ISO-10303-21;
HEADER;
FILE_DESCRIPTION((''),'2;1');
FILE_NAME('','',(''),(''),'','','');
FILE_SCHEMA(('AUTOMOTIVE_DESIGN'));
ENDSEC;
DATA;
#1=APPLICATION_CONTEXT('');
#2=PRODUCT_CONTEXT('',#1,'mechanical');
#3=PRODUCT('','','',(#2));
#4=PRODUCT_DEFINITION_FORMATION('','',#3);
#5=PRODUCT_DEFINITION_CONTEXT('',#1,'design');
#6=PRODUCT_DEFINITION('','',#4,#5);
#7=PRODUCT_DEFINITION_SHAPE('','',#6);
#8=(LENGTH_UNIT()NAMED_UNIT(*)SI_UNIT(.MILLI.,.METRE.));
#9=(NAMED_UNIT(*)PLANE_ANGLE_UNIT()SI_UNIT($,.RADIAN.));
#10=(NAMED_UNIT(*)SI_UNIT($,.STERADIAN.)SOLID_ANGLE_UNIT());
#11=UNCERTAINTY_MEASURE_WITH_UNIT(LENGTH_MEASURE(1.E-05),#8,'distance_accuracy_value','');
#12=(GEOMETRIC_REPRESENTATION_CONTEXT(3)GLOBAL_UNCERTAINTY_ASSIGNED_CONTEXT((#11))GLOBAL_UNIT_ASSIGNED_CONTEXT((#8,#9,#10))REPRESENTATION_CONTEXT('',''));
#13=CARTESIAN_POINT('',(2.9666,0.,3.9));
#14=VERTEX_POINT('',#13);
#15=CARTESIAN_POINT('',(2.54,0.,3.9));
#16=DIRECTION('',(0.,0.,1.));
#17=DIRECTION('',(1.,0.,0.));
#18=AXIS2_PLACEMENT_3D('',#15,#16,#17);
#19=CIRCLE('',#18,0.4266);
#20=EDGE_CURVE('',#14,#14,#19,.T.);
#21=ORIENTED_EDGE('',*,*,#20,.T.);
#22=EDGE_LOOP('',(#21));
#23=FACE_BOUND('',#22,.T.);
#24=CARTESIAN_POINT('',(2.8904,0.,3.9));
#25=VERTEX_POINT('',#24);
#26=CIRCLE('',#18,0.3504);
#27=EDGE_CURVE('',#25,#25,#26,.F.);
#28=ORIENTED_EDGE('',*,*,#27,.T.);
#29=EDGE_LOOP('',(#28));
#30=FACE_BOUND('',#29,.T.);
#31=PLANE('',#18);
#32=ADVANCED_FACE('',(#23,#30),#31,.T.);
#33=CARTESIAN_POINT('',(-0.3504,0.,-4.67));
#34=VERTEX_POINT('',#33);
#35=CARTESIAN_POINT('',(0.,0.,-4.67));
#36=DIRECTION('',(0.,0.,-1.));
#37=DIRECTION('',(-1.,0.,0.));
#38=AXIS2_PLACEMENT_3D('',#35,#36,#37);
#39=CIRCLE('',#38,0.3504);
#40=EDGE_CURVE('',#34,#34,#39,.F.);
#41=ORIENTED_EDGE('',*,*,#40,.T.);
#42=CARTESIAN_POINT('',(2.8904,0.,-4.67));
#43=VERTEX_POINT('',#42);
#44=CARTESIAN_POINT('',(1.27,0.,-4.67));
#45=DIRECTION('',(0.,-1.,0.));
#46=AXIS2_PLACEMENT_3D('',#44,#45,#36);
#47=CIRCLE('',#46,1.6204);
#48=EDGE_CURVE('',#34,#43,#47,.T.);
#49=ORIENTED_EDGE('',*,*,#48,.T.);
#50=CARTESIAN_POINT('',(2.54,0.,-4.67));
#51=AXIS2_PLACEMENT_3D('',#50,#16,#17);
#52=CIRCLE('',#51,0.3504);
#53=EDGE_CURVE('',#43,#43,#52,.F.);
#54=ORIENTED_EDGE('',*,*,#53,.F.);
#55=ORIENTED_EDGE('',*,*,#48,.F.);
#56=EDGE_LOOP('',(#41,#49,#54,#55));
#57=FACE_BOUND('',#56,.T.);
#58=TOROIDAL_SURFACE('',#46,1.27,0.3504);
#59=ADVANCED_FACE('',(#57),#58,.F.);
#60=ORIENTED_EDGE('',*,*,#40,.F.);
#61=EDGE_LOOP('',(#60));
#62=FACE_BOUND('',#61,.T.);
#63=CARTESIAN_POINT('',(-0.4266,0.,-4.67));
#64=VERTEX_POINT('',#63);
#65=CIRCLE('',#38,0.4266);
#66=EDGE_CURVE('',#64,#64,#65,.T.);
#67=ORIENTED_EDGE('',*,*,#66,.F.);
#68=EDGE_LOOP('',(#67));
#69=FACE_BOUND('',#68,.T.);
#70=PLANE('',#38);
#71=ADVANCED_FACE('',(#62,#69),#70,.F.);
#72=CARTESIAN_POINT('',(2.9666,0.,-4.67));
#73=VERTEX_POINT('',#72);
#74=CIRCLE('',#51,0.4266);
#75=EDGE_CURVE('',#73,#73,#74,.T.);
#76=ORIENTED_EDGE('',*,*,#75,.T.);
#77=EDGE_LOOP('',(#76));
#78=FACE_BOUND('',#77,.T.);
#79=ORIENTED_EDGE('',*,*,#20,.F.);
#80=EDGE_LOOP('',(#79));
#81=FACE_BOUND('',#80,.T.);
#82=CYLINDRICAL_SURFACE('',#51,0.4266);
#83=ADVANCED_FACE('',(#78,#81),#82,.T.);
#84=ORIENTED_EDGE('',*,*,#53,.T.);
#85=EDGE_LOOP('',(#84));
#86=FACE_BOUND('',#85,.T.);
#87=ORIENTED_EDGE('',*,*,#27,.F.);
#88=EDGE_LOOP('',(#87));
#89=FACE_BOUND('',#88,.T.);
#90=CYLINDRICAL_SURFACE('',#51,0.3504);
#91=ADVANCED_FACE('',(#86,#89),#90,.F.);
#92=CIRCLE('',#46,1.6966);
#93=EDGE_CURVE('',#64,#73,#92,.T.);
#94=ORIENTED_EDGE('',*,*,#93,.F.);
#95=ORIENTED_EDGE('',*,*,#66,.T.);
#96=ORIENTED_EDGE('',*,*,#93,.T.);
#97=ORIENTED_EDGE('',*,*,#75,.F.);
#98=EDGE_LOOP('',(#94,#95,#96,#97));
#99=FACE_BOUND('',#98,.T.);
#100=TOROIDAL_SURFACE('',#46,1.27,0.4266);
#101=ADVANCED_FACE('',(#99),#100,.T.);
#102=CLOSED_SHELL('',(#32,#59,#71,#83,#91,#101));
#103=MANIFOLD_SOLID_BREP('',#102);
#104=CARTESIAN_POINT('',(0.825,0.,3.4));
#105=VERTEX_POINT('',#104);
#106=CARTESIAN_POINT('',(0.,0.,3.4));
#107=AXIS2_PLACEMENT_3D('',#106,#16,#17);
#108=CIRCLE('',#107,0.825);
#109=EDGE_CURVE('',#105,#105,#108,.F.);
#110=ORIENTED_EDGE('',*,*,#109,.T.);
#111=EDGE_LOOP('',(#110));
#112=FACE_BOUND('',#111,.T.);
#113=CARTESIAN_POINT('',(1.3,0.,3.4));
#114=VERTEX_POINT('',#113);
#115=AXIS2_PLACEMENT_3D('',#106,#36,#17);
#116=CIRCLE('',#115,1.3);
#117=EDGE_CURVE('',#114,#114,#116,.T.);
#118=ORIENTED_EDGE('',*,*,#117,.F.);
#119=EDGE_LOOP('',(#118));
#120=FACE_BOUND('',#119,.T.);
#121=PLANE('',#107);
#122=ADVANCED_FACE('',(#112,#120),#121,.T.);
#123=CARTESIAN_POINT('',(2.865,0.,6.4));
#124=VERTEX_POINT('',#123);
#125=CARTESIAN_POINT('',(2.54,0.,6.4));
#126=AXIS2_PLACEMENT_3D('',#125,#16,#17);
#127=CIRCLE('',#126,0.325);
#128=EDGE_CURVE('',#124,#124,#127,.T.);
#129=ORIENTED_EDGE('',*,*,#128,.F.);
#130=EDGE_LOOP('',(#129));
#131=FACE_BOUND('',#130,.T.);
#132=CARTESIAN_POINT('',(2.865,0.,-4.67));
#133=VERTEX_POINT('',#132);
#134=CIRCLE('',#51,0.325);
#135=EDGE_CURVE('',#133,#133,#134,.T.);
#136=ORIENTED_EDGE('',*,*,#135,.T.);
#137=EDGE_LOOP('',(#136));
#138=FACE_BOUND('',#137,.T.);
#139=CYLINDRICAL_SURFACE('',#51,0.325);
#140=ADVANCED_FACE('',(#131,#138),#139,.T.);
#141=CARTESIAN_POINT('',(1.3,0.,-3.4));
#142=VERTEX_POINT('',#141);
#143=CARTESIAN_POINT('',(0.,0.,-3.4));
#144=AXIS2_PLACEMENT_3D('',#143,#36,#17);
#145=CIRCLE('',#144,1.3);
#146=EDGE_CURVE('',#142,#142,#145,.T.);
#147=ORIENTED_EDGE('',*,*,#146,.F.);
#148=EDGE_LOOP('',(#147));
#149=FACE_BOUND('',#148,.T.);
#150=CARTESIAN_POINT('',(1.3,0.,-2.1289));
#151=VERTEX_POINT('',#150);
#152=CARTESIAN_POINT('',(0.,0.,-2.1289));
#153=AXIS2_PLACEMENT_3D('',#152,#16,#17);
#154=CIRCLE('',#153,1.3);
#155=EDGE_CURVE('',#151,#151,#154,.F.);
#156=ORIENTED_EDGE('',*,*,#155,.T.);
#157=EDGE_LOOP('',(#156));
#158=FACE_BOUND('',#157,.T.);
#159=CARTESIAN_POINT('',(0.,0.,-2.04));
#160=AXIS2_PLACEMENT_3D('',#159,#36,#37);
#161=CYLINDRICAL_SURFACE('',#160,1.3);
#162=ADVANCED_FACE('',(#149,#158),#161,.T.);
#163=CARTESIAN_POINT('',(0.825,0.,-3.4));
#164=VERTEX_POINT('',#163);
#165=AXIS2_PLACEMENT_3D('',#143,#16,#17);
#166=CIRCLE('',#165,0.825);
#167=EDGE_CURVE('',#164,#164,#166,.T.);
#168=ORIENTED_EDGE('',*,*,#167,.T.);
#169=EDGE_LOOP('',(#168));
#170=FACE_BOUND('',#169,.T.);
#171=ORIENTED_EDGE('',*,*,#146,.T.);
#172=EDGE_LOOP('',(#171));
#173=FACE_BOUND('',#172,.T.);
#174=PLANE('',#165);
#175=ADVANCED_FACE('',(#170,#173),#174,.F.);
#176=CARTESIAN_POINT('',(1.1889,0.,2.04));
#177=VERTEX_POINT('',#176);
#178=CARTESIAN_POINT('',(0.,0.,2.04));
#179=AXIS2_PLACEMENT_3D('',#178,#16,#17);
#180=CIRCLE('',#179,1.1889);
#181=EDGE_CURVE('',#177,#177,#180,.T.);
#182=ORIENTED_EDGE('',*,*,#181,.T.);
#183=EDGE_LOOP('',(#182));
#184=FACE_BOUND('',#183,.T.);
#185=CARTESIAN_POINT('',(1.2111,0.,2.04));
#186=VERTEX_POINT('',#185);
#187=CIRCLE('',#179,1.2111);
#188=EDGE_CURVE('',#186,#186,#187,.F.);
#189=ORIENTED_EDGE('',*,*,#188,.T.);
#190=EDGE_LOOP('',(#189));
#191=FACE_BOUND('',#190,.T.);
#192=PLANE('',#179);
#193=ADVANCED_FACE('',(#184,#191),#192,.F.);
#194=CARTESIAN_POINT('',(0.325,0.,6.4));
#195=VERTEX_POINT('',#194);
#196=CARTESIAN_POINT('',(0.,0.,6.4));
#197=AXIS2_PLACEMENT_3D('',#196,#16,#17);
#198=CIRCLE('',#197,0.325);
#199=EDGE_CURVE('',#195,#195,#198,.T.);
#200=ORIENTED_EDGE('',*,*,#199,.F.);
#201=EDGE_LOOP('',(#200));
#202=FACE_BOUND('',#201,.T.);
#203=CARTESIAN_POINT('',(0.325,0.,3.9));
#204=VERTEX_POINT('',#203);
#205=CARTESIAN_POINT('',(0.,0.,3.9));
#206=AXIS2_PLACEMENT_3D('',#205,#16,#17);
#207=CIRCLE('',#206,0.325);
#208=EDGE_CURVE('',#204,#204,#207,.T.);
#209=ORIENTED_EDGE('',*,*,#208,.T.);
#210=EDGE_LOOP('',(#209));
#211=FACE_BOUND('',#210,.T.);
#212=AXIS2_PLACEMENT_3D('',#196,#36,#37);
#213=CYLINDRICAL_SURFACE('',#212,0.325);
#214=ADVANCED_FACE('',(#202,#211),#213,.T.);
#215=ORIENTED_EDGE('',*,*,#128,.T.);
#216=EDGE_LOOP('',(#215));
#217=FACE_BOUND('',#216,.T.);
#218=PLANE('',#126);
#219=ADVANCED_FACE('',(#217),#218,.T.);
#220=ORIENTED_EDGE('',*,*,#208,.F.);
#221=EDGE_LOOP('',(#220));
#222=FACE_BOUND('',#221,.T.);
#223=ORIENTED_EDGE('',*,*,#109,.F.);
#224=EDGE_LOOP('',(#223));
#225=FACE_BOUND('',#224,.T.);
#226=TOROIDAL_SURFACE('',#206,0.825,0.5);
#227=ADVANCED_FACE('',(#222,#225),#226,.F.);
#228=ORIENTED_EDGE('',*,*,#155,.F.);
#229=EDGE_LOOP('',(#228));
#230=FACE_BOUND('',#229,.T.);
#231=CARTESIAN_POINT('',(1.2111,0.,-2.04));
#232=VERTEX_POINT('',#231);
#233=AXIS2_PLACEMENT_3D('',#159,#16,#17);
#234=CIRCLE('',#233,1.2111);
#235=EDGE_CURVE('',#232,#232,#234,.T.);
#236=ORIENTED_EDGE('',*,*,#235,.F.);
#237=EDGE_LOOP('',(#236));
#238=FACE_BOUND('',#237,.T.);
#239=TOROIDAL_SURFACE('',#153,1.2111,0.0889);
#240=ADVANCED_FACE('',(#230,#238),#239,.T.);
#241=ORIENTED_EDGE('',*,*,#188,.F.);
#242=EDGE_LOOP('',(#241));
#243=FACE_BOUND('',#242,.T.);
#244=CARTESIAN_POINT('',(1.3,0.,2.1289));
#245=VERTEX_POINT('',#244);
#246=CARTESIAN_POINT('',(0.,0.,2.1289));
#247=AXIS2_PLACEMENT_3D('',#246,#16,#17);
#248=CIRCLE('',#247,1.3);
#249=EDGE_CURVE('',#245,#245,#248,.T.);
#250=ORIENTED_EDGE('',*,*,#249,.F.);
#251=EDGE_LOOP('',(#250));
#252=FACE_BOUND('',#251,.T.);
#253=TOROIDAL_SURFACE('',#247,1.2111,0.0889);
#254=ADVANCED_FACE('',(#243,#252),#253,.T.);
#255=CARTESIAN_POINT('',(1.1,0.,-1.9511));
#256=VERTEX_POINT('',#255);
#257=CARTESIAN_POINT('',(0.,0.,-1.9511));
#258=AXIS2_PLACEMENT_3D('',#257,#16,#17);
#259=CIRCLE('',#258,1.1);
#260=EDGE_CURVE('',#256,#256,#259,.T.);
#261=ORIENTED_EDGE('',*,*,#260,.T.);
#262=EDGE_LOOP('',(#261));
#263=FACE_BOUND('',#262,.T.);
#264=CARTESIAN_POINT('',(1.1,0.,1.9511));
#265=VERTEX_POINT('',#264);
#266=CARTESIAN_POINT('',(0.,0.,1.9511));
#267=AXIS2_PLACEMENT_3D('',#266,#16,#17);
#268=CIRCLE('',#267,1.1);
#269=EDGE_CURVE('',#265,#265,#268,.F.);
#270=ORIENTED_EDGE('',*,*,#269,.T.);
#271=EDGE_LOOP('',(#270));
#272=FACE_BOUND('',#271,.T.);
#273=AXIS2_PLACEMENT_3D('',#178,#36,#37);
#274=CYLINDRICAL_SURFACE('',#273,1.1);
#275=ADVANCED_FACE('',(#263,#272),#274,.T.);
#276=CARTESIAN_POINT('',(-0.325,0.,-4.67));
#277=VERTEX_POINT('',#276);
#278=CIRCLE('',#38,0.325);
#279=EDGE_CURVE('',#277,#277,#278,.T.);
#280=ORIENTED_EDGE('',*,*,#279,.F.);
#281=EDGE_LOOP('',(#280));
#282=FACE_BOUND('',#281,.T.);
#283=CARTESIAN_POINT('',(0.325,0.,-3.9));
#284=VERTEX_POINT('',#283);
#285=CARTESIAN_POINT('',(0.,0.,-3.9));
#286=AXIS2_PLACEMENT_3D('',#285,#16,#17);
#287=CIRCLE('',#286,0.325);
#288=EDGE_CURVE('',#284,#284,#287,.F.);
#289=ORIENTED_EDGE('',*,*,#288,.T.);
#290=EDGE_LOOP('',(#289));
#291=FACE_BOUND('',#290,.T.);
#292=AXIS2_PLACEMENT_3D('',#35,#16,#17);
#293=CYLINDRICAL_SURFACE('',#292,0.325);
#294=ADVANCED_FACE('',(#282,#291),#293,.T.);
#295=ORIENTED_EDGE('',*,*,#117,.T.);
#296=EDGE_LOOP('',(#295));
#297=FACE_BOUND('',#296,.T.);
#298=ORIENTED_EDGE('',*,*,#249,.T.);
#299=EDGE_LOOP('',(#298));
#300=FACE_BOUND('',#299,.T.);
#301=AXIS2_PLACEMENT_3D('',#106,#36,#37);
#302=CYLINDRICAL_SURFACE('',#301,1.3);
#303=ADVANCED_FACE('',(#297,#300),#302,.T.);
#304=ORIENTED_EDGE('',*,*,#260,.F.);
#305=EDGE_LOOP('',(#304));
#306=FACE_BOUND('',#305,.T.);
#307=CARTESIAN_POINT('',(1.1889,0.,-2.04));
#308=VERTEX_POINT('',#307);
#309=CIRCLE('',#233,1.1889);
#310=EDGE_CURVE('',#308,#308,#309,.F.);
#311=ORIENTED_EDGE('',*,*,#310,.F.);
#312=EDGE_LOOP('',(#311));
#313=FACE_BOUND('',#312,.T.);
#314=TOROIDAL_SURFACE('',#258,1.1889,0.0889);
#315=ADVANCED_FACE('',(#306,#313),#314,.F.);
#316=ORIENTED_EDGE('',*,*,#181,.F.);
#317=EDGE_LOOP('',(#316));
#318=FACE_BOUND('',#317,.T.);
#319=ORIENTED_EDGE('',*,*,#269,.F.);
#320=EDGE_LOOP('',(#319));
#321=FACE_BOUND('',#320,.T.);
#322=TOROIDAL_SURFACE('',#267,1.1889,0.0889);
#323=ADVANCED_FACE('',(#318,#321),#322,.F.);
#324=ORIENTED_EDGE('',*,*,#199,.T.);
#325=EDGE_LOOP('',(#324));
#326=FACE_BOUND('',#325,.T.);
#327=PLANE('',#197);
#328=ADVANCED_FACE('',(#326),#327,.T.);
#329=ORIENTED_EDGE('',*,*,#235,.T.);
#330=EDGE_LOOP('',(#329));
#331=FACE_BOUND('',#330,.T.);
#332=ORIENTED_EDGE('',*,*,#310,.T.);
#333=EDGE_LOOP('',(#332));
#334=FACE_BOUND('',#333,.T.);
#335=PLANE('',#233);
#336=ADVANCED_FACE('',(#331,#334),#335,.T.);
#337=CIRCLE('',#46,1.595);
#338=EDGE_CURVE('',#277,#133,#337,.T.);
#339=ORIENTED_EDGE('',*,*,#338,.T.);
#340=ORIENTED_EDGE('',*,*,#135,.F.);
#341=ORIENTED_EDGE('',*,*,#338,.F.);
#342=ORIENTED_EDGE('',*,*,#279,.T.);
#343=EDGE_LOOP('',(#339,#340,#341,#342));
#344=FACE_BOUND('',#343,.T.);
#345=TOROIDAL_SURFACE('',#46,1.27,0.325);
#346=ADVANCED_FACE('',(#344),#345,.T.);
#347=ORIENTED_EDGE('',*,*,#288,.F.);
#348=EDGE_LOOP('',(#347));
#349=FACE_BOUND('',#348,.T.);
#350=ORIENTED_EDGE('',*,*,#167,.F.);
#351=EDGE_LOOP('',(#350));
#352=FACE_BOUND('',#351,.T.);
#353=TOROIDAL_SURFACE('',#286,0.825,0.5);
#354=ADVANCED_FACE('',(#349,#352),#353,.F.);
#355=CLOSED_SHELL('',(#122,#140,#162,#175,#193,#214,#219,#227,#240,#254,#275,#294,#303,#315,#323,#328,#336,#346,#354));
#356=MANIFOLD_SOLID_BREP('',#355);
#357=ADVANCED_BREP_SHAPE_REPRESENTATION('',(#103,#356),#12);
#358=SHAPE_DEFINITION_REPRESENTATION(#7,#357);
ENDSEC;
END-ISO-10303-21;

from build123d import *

# Parameters (mm, degrees)
SKETCH1_R           = 1.3
BOSS_EXTRUDE1_DEPTH = 1.36
SKETCH2_R           = 1.1
BOSS_EXTRUDE2_DEPTH = 4.08
SKETCH3_R           = 1.3
BOSS_EXTRUDE3_DEPTH = 1.36
SKETCH4_R           = 0.325
BOSS_EXTRUDE4_DEPTH = 1.27
BOSS_EXTRUDE5_START = 3
SKETCH5_R           = 0.325
BOSS_EXTRUDE5_DEPTH = 3
FILLET1_R           = 0.5
FILLET2_R           = 0.0889
SWEEP1_OUTLINE_R    = 0.325
SWEEP1_ANGLE        = 180
SWEEP1_START        = -4.67
SWEEP1_2_OUTLINE_R  = 0.325
SWEEP1_2_DEPTH      = 11.07
SKETCH9_R           = 0.4266
SKETCH9_R_2         = 0.3504


with BuildPart() as part:
    # Sketch1 → Boss-Extrude1 (new body)
    with BuildSketch(Plane(origin=(0, 0, -3.4), x_dir=(-1, 0, 0), z_dir=(0, 0, -1))):
        with Locations(Location((0, 0, 0), (0, 0, 180))):
            Circle(SKETCH1_R)
    extrude(amount=-BOSS_EXTRUDE1_DEPTH)

    # Sketch2 → Boss-Extrude2 (add)
    with BuildSketch(Plane.XY.offset(-2.04)):
        Circle(SKETCH2_R)
    extrude(amount=BOSS_EXTRUDE2_DEPTH)

    # Sketch3 → Boss-Extrude3 (add)
    with BuildSketch(Plane(origin=(0, 0, 2.04), x_dir=(-1, 0, 0), z_dir=(0, 0, -1))):
        with Locations(Location((0, 0, 0), (0, 0, 180))):
            Circle(SKETCH3_R)
    extrude(amount=-BOSS_EXTRUDE3_DEPTH)

    # Sketch4 → Boss-Extrude4 (add)
    with BuildSketch(Plane(origin=(0, 0, -3.4), x_dir=(-1, 0, 0), z_dir=(0, 0, -1))):
        Circle(SKETCH4_R)
    extrude(amount=BOSS_EXTRUDE4_DEPTH)

    # Sketch5 → Boss-Extrude5 (add)
    with BuildSketch(Plane.XY.offset(3.4).offset(BOSS_EXTRUDE5_START)):
        with Locations(Location((0, 0, 0), (0, 0, 180))):
            Circle(SKETCH5_R)
    extrude(amount=-BOSS_EXTRUDE5_DEPTH)

    # Fillet1
    fillet1_edges = [part.edges().sort_by_distance(p)[0] for p in [
        (0.325, 0, -3.4),
        (0.325, 0, 3.4),
    ]]
    fillet(fillet1_edges, radius=FILLET1_R)

    # Fillet2
    fillet2_edges = [part.edges().sort_by_distance(p)[0] for p in [
        (-1.3, 0, 2.04),
        (-1.3, 0, -2.04),
        (-1.1, 0, -2.04),
        (-1.1, 0, 2.04),
    ]]
    fillet(fillet2_edges, radius=FILLET2_R)

    # Sweep1: read off the stored shape, not the designer's step
    # Sweep1 outline → Sweep1 (revolve)
    with BuildSketch(Plane(origin=(1.27, 0, -4.67), x_dir=(1, 0, 0), z_dir=(0, 0, 1))):
        with Locations((1.27, 0)):
            Circle(SWEEP1_OUTLINE_R)
    revolve(axis=Axis((1.27, 0, -4.67), (0, 1, 0)), revolution_arc=SWEEP1_ANGLE)

    # Sweep1 2 outline → Sweep1 2 (add)
    with BuildSketch(Plane.XY.offset(SWEEP1_START)):
        with Locations((2.54, 0)):
            Circle(SWEEP1_2_OUTLINE_R)
    extrude(amount=SWEEP1_2_DEPTH)


with BuildPart() as body_2:
    # Sweep2: sweep along a path in Sketch8<2>
    with BuildLine(Plane(origin=(0, 0, 0), x_dir=(1, 0, 0), z_dir=(0, 1, 0))) as sweep2_path:
        Line((2.54, -3.9), (2.54, 4.67))
        ThreePointArc((2.54, 4.67), (1.27, 5.94), (0, 4.67))
    # Sketch9 → Sweep2 (sweep)
    with BuildSketch(Plane.XY.offset(3.9)):
        with Locations((2.54, 0)):
            Circle(SKETCH9_R)
        with Locations((2.54, 0)):
            Circle(SKETCH9_R_2, mode=Mode.SUBTRACT)
    sweep(path=sweep2_path.line)


solid = Compound([part.part, body_2.part])
